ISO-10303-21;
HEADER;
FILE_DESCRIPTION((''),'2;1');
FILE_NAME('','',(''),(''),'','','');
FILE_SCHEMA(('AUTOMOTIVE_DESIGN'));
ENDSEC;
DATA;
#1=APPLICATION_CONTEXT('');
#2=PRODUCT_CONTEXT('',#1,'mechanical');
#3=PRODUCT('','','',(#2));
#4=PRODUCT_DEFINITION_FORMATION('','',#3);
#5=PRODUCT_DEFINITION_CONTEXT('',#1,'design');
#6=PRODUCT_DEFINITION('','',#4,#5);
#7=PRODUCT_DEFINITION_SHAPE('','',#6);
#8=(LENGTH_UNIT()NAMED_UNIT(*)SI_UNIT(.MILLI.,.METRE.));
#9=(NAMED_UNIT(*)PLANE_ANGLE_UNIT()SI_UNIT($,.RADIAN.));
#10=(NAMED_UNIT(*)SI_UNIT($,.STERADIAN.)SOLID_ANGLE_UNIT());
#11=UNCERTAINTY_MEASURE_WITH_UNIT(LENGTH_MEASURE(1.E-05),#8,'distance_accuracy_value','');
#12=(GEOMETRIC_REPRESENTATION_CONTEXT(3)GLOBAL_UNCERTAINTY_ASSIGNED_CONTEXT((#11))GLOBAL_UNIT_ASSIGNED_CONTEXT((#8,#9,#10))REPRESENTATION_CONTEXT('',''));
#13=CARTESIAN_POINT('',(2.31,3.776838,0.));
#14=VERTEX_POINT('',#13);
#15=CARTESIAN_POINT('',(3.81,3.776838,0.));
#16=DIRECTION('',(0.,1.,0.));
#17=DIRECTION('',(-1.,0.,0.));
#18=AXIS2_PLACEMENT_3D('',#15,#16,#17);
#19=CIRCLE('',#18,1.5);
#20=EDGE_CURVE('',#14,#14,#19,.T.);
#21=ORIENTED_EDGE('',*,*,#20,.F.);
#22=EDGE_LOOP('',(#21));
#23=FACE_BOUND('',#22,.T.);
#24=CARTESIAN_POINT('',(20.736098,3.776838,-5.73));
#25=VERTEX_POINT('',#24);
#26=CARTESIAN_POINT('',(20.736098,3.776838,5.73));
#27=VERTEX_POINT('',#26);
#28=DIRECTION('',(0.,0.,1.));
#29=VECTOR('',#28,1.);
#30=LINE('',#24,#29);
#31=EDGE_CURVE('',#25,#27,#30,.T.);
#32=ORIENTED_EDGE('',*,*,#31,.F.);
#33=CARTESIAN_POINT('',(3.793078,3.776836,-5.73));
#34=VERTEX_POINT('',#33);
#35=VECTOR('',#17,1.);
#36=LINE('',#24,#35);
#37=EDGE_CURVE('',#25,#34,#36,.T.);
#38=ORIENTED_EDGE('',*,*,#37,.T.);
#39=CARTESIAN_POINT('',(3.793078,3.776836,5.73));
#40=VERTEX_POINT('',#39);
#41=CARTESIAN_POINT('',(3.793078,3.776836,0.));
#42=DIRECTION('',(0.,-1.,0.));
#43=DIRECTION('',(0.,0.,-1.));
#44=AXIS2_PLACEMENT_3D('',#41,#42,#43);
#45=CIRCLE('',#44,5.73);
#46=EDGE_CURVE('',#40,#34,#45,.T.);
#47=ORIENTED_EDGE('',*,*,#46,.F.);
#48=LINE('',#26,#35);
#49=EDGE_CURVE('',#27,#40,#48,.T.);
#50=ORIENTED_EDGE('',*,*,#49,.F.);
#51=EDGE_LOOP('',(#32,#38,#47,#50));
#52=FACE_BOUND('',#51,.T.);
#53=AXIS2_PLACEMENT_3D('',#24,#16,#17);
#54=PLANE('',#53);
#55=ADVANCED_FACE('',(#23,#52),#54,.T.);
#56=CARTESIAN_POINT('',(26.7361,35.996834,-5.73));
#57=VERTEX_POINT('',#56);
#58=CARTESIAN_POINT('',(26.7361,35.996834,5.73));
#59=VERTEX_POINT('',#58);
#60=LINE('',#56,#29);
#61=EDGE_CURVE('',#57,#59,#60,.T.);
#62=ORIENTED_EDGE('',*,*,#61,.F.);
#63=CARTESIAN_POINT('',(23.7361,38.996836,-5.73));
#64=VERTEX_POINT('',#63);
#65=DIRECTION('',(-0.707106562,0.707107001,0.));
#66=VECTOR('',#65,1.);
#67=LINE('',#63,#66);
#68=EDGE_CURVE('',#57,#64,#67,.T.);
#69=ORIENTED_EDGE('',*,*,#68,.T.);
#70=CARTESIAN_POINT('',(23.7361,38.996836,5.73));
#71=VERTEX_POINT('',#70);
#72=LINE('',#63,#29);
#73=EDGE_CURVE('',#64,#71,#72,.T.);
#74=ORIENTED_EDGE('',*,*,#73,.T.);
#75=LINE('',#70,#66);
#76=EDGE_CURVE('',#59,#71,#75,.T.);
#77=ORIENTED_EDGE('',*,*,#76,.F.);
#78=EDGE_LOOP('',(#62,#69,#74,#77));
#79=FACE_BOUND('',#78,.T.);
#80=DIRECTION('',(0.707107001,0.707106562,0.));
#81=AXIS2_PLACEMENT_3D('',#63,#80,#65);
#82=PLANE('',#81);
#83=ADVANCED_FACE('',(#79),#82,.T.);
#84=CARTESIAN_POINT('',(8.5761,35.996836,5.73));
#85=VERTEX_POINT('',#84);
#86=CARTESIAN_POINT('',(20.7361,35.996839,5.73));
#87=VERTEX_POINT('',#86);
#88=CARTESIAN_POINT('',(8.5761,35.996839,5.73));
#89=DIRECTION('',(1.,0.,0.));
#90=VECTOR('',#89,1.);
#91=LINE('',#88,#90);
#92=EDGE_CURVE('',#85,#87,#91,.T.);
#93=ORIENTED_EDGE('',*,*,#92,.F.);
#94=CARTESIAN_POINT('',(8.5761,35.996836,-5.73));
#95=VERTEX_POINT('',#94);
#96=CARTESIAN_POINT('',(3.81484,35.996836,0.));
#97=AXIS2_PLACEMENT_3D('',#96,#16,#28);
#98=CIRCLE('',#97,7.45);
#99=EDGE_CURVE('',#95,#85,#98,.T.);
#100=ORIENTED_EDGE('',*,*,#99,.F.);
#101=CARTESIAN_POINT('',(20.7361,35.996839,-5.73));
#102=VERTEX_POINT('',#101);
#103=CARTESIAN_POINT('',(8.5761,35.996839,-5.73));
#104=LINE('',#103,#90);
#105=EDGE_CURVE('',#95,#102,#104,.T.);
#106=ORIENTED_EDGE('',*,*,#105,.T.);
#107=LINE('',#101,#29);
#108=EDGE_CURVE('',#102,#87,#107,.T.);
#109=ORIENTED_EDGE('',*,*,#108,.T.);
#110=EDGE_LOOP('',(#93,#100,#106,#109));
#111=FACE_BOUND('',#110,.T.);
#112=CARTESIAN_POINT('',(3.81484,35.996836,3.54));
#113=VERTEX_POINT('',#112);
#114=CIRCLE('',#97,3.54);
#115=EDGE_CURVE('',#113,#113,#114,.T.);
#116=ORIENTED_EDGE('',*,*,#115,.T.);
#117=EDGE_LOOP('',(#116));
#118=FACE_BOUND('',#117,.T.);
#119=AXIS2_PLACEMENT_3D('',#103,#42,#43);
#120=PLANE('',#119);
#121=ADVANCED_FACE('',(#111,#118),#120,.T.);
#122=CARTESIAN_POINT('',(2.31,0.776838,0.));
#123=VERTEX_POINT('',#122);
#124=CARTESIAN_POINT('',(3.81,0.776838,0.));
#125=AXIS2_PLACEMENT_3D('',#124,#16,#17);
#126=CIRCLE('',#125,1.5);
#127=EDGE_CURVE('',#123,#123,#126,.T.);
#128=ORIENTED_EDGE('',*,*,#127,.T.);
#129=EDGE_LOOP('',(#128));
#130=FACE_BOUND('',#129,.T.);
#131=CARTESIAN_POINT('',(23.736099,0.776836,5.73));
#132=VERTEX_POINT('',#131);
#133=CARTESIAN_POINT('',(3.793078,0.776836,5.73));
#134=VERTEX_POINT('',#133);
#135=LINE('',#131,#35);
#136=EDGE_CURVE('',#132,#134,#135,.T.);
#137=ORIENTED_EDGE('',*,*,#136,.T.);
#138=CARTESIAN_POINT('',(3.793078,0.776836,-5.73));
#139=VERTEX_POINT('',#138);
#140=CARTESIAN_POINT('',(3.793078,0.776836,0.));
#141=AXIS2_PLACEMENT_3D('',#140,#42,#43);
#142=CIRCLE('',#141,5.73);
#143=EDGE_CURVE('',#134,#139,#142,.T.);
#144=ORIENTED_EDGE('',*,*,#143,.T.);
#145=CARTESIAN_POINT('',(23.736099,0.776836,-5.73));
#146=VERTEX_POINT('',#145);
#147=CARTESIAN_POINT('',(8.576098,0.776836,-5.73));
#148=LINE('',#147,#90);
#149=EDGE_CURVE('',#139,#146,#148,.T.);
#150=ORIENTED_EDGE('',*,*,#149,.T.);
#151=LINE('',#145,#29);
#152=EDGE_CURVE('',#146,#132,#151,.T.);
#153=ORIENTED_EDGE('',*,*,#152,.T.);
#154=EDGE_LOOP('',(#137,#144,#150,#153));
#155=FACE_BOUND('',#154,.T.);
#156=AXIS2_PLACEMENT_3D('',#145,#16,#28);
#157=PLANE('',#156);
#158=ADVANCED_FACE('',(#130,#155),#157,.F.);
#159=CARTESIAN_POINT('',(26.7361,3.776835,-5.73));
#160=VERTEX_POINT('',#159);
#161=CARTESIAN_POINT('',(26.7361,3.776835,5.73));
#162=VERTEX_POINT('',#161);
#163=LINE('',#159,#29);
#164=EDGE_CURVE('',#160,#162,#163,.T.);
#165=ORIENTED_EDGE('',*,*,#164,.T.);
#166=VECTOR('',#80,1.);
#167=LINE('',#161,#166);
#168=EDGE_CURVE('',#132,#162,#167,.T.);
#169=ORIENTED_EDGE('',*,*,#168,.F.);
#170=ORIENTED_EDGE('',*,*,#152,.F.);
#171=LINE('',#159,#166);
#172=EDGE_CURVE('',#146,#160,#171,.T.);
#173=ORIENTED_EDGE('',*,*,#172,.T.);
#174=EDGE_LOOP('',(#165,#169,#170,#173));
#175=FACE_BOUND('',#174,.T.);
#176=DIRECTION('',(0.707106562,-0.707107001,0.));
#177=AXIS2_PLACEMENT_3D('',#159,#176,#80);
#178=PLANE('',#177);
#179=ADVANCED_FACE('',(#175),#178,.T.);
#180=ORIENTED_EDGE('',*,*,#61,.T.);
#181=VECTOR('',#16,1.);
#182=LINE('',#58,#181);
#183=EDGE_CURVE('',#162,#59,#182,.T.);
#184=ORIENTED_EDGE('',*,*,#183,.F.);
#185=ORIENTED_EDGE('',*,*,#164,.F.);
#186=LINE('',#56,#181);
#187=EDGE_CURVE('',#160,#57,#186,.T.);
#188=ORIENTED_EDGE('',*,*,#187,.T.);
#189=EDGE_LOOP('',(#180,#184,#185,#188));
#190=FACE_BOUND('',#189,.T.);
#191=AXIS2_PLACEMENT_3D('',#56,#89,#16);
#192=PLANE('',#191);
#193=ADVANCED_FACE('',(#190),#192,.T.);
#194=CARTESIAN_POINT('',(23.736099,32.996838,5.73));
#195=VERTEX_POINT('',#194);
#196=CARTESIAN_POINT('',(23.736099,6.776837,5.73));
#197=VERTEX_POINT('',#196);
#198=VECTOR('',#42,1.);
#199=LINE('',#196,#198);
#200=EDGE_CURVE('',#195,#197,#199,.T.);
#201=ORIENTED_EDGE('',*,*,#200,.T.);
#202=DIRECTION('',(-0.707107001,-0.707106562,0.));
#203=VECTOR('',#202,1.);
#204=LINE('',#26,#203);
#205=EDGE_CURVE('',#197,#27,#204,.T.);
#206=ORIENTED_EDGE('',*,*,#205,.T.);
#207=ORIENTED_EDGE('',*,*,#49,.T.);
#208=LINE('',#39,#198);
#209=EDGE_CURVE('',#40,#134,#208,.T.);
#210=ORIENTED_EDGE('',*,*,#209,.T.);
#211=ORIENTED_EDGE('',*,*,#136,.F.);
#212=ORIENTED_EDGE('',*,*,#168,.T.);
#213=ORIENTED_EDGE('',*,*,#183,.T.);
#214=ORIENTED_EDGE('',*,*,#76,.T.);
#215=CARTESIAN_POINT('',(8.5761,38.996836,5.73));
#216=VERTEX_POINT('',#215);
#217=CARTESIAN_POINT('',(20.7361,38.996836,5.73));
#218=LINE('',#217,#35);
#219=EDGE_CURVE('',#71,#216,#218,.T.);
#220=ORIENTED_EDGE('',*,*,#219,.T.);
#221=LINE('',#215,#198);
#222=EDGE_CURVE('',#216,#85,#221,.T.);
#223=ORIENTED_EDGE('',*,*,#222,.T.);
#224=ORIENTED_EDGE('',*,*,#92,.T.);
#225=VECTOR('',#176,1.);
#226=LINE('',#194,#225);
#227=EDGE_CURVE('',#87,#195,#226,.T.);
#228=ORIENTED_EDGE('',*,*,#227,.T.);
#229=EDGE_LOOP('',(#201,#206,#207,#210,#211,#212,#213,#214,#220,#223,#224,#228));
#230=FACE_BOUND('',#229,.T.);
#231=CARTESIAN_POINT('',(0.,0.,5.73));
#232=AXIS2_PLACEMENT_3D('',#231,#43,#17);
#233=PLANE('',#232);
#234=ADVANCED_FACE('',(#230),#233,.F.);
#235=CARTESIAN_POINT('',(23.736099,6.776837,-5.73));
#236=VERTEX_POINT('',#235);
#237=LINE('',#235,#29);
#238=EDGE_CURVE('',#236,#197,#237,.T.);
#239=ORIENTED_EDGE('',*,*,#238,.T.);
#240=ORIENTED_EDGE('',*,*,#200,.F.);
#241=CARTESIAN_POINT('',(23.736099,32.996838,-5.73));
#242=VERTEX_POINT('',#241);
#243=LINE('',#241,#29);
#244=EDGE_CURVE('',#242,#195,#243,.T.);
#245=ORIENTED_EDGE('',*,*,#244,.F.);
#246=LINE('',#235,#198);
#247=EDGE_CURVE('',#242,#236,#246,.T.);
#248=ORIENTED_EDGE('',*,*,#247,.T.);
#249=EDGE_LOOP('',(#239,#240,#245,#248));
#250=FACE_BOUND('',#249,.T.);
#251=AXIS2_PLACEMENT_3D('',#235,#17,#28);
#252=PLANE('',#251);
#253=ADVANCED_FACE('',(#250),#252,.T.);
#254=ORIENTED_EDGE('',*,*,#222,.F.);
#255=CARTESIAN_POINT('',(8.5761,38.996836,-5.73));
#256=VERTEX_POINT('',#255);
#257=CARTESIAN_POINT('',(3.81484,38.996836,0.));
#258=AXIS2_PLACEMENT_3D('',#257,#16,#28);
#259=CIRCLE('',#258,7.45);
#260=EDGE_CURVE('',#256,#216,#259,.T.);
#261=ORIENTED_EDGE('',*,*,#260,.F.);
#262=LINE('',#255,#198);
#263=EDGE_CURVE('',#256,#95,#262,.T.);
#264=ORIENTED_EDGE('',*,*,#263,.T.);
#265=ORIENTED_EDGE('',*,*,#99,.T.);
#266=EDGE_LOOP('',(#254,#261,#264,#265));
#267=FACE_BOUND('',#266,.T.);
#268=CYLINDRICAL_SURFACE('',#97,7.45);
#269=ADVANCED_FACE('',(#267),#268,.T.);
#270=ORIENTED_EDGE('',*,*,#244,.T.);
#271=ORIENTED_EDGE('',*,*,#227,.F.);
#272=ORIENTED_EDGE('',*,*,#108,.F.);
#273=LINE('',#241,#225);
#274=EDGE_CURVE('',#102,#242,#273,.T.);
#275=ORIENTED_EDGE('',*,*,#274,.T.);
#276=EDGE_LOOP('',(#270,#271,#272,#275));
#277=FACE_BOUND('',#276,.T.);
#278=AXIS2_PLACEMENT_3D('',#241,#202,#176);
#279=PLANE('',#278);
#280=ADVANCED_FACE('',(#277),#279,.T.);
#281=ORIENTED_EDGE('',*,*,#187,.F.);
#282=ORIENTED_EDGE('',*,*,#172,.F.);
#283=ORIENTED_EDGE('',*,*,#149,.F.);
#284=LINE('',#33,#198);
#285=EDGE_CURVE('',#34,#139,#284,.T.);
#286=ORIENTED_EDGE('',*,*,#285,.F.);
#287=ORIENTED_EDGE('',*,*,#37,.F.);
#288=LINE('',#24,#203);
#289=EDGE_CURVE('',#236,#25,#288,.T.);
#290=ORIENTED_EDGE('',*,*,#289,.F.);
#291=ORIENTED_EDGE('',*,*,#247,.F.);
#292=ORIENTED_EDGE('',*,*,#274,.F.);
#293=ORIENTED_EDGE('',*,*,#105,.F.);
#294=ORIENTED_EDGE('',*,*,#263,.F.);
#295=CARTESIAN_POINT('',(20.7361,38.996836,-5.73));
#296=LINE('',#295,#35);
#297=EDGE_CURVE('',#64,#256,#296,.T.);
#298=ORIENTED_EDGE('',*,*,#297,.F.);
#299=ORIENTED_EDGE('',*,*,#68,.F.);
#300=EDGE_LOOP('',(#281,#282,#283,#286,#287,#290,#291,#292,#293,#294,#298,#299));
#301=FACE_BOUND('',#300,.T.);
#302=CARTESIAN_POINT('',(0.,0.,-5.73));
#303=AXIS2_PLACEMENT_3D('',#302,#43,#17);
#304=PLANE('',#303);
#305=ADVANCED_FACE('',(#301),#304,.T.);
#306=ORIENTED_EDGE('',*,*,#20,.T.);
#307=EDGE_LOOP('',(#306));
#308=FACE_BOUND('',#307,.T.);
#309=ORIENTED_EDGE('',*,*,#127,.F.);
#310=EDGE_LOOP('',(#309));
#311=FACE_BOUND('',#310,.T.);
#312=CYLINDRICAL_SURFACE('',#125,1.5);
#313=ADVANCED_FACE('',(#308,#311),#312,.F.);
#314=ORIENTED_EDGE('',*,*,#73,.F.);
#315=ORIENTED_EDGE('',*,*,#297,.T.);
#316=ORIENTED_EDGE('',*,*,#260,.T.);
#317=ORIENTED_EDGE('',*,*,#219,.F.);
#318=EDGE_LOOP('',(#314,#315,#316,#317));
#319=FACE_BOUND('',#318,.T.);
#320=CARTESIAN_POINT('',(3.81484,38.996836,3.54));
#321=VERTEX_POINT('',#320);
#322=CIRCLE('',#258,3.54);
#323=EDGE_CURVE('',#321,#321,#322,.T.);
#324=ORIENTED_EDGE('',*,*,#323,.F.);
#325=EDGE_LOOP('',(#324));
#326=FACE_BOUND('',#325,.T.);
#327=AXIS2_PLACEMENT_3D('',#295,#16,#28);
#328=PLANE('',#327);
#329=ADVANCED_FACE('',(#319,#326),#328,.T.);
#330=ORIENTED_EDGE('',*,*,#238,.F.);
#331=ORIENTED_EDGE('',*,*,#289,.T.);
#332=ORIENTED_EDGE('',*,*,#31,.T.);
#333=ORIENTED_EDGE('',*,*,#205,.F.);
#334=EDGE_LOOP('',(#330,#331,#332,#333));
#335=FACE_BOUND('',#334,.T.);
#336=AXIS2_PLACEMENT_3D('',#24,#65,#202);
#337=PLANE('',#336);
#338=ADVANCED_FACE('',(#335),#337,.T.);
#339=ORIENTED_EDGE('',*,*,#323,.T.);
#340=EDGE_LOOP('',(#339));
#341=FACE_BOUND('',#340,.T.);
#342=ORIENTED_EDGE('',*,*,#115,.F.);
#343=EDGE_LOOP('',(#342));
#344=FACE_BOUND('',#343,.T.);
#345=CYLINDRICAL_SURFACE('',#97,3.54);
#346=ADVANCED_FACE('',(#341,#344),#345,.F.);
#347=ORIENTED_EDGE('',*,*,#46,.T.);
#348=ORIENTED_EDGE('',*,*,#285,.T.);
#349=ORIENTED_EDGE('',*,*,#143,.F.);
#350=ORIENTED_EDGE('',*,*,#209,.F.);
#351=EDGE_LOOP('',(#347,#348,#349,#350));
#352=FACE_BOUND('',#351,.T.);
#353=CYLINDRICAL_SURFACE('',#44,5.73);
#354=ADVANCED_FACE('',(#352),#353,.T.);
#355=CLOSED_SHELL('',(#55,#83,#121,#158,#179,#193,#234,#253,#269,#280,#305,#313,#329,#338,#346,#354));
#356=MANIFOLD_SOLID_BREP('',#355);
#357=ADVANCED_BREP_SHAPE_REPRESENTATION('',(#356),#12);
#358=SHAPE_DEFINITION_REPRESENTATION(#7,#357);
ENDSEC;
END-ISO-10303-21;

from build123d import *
from OCP.BRepAlgoAPI import BRepAlgoAPI_Cut
from OCP.TopTools import TopTools_ListOfShape

# Parameters (mm, degrees)
BOSS_EXTRUDE1_DEPTH      = 5.73
BOSS_EXTRUDE1_DEPTH_BACK = 5.73
BOSS_EXTRUDE5_DEPTH      = 11.46
BOSS_EXTRUDE8_DEPTH      = 11.46
BOSS_EXTRUDE9_DEPTH      = 3
SKETCH11_R               = 3.54
CUT_EXTRUDE1_DEPTH       = 3
BOSS_EXTRUDE10_DEPTH     = 3
SKETCH13_R               = 1.5
CUT_EXTRUDE2_DEPTH       = 3


with BuildPart() as part:
    # Sketch1 → Boss-Extrude1 (new, two sides: drawn at the far end of the back side and taken through both)
    with BuildSketch(Plane.XY.offset(-BOSS_EXTRUDE1_DEPTH_BACK)):
        Polygon((23.736099909, 38.996836219), (26.736100401, 35.996833865), (26.736100401, 3.776835326), (23.736098978, 0.776835766), (20.736098486, 3.77683812), (23.736098978, 6.776836749), (23.736098978, 32.99683803), (20.736100349, 35.996838521), align=None)
    extrude(amount=BOSS_EXTRUDE1_DEPTH + BOSS_EXTRUDE1_DEPTH_BACK)

    # Sketch6 → Boss-Extrude5 (add)
    with BuildSketch(Plane.XY.offset(5.73)):
        Polygon((20.736098486, 3.77683812), (8.576098486, 3.77683812), (8.576098486, 0.776835766), (20.736098486, 0.776835766), (23.736098978, 0.776835766), align=None)
    extrude(amount=-BOSS_EXTRUDE5_DEPTH)

    # Sketch8 → Boss-Extrude8 (add)
    with BuildSketch(Plane.XY.offset(5.73)):
        Polygon((20.736100349, 38.996836219), (23.736099909, 38.996836219), (20.736100349, 35.996838521), (8.576100349, 35.996838521), (8.576100349, 38.996836219), align=None)
    extrude(amount=-BOSS_EXTRUDE8_DEPTH)

    # Sketch9 → Boss-Extrude9 (add)
    with BuildSketch(Plane(origin=(0, 38.996836219, 0), x_dir=(1, 0, 0), z_dir=(0, 1, 0))):
        with BuildLine():
            Line((8.576100349, 5.73), (8.576100349, -5.73))
            ThreePointArc((8.576100349, -5.73), (-3.635159989, 0), (8.576100349, 5.73))
        make_face()
    extrude(amount=-BOSS_EXTRUDE9_DEPTH)

    # Sketch11 → Cut-Extrude1 (cut)
    with BuildSketch(Plane(origin=(0, 38.996836219, 0), x_dir=(1, 0, 0), z_dir=(0, 1, 0))):
        with Locations((3.814840011, 0)):
            Circle(SKETCH11_R)
    extrude(amount=-CUT_EXTRUDE1_DEPTH, mode=Mode.SUBTRACT)

    # Sketch12 → Boss-Extrude10 (add)
    with BuildSketch(Plane(origin=(0, 0.776835766, 0), x_dir=(-1, 0, 0), z_dir=(0, -1, 0))):
        with BuildLine():
            Line((-8.576098486, 5.73), (-3.793078174, 5.73))
            ThreePointArc((-3.793078174, 5.73), (1.936921826, 0), (-3.793078174, -5.73))
            Line((-3.793078174, -5.73), (-8.576098486, -5.73))
            Line((-8.576098486, -5.73), (-8.576098486, 5.73))
        make_face()
    extrude(amount=-BOSS_EXTRUDE10_DEPTH)


with BuildPart() as cut_extrude2_tool:
    # Sketch13 → Cut-Extrude2 (new body)
    with BuildSketch(Plane(origin=(0, 3.77683812, 0), x_dir=(1, 0, 0), z_dir=(0, 1, 0))):
        with Locations((3.81, 0)):
            Circle(SKETCH13_R)
    extrude(amount=-CUT_EXTRUDE2_DEPTH)


with BuildPart() as part_1:
    add(part.part)

    # Cut-Extrude2: cut by cut_extrude2_tool, with a tolerance
    cut_extrude2_stock = TopTools_ListOfShape()
    cut_extrude2_stock.Append(part_1.part.wrapped)
    cut_extrude2_tools = TopTools_ListOfShape()
    cut_extrude2_tools.Append(cut_extrude2_tool.part.wrapped)
    cut_extrude2_cut = BRepAlgoAPI_Cut()
    cut_extrude2_cut.SetArguments(cut_extrude2_stock)
    cut_extrude2_cut.SetTools(cut_extrude2_tools)
    cut_extrude2_cut.SetFuzzyValue(0.00001)
    cut_extrude2_cut.Build()
    add(Compound.cast(cut_extrude2_cut.Shape()).solids(), mode=Mode.REPLACE)


solid = part_1.part
